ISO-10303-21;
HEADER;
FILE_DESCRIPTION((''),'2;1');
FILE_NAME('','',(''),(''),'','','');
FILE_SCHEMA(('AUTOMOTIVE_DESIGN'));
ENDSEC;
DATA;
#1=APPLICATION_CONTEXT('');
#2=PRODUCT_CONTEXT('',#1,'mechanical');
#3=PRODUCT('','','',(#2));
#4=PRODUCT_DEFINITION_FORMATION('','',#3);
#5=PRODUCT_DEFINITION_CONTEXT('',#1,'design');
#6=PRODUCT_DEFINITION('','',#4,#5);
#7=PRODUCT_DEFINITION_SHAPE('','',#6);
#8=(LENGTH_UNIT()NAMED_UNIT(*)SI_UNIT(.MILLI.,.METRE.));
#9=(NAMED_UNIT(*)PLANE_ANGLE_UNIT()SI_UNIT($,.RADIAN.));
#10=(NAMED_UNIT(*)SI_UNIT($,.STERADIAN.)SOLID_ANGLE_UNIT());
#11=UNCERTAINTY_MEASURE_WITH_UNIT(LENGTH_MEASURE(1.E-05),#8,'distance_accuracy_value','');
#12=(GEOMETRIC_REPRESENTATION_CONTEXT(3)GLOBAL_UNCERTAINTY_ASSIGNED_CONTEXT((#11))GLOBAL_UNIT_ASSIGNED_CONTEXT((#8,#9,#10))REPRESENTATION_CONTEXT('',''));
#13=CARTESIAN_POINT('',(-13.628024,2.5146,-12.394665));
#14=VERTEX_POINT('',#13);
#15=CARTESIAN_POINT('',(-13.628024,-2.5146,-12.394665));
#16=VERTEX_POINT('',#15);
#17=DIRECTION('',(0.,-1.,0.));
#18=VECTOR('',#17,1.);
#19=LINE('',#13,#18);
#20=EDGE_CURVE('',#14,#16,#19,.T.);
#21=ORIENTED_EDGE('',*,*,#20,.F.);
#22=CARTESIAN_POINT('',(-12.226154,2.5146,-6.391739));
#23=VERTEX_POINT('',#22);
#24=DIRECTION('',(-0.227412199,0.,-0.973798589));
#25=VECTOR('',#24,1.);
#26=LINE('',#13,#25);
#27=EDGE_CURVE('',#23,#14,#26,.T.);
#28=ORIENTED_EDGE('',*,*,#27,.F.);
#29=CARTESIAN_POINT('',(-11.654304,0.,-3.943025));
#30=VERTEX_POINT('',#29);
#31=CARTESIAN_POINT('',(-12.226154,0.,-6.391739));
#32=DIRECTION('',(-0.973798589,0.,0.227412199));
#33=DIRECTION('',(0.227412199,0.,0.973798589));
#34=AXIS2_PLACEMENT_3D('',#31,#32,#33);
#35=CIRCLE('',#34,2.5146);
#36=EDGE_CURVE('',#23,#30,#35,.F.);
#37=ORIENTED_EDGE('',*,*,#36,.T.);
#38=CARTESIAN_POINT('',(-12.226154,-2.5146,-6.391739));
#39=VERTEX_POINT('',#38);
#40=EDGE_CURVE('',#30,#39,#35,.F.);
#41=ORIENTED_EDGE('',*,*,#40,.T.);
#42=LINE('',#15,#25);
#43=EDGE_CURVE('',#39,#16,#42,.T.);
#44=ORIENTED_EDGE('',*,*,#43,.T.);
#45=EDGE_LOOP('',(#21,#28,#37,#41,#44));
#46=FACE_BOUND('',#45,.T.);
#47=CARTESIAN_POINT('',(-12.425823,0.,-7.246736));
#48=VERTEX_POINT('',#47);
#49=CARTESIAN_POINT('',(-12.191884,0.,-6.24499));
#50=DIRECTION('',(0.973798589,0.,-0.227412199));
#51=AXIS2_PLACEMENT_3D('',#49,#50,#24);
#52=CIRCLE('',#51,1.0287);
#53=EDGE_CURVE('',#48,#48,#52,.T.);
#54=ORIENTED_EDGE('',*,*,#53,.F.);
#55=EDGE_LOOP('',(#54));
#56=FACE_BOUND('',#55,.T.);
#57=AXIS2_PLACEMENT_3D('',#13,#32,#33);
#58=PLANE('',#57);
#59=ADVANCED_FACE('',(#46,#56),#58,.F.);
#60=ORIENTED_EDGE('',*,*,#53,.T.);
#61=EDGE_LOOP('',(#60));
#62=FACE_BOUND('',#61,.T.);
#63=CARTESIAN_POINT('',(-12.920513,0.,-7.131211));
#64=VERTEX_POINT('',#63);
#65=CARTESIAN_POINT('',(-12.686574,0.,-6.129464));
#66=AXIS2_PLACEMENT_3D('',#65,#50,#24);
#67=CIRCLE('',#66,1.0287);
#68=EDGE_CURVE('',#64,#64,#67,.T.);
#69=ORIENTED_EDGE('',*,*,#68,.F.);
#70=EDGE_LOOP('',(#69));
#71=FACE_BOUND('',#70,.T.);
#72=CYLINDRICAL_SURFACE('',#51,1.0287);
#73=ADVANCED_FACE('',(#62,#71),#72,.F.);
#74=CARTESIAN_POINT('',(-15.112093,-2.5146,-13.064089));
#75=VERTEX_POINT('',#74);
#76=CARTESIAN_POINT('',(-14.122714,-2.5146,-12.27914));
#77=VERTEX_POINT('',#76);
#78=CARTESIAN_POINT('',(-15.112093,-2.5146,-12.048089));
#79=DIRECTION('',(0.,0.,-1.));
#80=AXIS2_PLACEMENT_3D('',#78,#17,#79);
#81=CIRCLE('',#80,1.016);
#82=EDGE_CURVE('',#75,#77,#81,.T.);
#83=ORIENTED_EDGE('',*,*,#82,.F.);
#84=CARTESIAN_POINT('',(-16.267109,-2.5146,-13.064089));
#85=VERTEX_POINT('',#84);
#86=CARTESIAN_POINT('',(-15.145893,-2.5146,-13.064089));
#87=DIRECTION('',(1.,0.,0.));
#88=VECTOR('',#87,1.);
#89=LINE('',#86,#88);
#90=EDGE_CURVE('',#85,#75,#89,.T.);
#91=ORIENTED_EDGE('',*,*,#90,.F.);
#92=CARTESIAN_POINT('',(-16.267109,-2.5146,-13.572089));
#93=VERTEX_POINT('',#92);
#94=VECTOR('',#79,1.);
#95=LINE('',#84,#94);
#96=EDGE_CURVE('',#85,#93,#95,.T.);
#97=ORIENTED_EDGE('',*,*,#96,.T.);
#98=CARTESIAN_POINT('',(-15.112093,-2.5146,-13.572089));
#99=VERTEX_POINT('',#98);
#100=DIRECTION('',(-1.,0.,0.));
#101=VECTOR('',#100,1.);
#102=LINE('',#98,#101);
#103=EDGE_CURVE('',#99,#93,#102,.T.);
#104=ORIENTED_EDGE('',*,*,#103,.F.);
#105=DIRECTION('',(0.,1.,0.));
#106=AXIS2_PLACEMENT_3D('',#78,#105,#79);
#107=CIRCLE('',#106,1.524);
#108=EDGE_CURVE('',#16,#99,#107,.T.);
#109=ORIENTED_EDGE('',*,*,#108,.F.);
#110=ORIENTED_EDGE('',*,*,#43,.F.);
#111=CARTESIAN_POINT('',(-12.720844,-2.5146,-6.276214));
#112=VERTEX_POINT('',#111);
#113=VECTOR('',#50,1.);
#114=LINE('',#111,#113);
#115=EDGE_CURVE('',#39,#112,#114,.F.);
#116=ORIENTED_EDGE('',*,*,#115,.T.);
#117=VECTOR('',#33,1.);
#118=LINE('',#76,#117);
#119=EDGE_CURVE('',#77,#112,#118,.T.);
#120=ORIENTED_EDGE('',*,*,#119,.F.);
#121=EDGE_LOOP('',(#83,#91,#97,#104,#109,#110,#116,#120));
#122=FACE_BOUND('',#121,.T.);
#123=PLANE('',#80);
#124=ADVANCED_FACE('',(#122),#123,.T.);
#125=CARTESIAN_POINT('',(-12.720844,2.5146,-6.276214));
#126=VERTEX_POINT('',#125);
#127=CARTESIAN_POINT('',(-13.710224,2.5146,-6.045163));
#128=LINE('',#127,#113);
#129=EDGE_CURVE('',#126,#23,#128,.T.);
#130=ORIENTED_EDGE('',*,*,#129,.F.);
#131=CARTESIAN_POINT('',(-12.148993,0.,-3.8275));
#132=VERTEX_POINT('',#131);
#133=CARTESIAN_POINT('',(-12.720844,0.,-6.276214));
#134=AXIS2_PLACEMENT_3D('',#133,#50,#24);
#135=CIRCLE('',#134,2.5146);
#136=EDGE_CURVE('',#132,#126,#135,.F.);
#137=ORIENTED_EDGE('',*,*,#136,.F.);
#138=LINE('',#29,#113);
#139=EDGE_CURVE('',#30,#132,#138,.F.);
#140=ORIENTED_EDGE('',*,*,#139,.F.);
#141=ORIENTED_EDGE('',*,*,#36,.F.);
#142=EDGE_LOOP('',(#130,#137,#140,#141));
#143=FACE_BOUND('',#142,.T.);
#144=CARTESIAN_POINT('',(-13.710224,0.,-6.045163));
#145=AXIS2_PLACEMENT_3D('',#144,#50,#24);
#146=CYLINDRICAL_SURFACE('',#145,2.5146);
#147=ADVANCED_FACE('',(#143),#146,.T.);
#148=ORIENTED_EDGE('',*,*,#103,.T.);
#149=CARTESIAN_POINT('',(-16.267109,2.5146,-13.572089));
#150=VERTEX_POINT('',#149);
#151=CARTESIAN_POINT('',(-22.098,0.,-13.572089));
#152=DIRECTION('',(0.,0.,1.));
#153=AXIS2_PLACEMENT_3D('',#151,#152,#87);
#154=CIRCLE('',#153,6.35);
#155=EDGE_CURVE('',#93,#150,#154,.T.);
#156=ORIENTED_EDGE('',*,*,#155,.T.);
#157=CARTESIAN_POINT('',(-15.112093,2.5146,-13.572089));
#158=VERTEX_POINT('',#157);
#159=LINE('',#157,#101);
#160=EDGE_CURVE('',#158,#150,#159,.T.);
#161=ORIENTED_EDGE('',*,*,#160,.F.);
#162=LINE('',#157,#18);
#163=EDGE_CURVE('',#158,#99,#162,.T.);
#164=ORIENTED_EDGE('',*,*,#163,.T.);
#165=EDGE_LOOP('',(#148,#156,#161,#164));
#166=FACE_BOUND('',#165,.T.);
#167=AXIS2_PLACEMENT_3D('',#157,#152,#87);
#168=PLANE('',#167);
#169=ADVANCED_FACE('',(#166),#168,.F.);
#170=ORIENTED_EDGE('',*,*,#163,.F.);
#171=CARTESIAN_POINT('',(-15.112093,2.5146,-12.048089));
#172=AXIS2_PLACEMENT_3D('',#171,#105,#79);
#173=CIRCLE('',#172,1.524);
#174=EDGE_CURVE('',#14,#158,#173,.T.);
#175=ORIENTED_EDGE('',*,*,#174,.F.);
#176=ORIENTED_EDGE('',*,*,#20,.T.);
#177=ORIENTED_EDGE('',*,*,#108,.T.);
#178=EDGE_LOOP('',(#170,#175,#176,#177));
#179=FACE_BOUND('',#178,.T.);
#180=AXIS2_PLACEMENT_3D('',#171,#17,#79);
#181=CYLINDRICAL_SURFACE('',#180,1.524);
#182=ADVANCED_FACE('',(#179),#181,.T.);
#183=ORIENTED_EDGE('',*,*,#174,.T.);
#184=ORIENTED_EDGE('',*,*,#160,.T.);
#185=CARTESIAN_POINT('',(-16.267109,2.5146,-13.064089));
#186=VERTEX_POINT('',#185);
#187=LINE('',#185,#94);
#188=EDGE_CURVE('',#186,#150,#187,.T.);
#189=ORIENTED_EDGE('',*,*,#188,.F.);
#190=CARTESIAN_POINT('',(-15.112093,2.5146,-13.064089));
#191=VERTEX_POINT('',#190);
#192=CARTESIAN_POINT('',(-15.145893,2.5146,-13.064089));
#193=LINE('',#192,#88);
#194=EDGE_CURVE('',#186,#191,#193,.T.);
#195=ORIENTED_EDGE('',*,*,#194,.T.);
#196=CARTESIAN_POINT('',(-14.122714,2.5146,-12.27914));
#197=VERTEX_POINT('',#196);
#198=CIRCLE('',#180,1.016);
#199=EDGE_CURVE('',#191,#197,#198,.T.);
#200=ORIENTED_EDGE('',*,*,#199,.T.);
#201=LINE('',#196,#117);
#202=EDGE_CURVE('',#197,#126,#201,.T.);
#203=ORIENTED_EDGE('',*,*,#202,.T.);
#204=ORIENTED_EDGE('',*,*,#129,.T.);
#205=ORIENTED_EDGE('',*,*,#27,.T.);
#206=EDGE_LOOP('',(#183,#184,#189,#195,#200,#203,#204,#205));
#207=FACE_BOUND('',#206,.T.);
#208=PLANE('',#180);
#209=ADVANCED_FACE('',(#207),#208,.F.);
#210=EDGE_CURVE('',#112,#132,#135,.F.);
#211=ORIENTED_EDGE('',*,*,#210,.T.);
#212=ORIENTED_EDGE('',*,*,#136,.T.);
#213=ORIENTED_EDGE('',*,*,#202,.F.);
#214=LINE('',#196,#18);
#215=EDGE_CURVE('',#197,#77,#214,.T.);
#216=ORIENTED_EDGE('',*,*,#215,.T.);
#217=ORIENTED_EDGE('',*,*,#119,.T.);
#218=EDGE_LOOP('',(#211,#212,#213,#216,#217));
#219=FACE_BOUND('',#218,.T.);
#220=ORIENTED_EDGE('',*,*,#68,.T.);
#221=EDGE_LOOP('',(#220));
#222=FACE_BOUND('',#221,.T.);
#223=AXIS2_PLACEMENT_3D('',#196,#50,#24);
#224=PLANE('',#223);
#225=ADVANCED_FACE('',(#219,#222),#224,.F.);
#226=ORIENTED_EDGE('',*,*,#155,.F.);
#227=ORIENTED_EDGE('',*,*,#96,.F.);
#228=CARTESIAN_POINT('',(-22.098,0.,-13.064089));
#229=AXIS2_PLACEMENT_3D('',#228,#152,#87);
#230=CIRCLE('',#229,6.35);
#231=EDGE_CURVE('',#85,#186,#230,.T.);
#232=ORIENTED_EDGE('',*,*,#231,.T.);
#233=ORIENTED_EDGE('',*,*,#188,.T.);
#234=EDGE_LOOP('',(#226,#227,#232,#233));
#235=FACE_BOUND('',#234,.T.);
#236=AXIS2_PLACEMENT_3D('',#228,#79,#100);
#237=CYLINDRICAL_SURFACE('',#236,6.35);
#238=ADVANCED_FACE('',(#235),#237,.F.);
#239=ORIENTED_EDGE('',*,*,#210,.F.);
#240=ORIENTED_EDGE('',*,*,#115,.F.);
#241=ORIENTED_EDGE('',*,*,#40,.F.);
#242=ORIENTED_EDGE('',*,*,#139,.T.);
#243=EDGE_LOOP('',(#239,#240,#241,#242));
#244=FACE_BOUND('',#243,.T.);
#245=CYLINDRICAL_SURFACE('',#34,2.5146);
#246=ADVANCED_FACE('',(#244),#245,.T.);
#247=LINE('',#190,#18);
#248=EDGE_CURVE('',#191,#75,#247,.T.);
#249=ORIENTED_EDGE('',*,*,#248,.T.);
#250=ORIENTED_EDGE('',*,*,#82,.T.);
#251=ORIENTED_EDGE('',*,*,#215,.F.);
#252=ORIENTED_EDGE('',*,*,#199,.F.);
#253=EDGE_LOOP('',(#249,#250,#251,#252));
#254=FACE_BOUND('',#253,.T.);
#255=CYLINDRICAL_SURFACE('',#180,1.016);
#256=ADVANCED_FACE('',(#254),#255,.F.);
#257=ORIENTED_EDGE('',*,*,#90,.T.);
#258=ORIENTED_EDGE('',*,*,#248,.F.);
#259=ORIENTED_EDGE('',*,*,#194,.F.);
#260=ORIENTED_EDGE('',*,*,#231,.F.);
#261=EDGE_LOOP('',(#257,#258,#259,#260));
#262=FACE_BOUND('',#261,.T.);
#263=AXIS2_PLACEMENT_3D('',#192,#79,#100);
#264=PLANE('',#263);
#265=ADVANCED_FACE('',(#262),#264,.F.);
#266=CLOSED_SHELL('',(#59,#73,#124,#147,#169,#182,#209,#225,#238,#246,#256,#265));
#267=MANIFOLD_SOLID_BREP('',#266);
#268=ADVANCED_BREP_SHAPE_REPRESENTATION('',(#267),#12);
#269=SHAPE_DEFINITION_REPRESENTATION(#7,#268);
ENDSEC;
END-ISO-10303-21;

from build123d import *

# Parameters (mm, degrees)
EXTRUDE1_DEPTH                   = 2.5146
EXTRUDE1_DEPTH_BACK              = 2.5146
FILLET1_R                        = 2.5146
EXTRUDE2_DEPTH                   = 0.508
F_97_0_0059_DIAMETER_HOLE1_D     = 2.0574
F_97_0_0059_DIAMETER_HOLE1_DEPTH = 6.35


with BuildPart() as part:
    # Sketch1 → Extrude1 (new, two sides: drawn at the far end of the back side and taken through both)
    with BuildSketch(Plane(origin=(0, 0, 0), x_dir=(1, 0, 0), z_dir=(0, 1, 0)).offset(-EXTRUDE1_DEPTH_BACK)):
        with BuildLine():
            Line((-15.145893147, 13.572089242), (-15.145893147, 13.064089242))
            Line((-15.145893147, 13.064089242), (-15.112093192, 13.064089242))
            ThreePointArc((-15.112093192, 13.064089242), (-14.480623322, 12.844017507), (-14.122713826, 12.279140036))
            Line((-14.122713826, 12.279140036), (-12.14899346, 3.827499715))
            Line((-12.14899346, 3.827499715), (-11.654303777, 3.943025112))
            Line((-11.654303777, 3.943025112), (-13.628024142, 12.394665433))
            ThreePointArc((-13.628024142, 12.394665433), (-14.164888387, 13.24198164), (-15.112093192, 13.572089242))
            Line((-15.112093192, 13.572089242), (-15.145893147, 13.572089242))
        make_face()
    extrude(amount=EXTRUDE1_DEPTH + EXTRUDE1_DEPTH_BACK)

    # Fillet1
    fillet1_edges = [part.edges().sort_by_distance(p)[0] for p in [
        (-11.901648619, -2.5146, -3.885262414),
        (-11.901648619, 2.5146, -3.885262414),
    ]]
    fillet(fillet1_edges, radius=FILLET1_R - 0.0001)  # a hair under: the kernel refuses the full size

    # Sketch2 → Extrude2 (add)
    with BuildSketch(Plane(origin=(0, 0, -13.572089242), x_dir=(-1, 0, 0), z_dir=(0, 0, -1))):
        with BuildLine():
            Line((15.145893147, 2.5146), (15.145893147, -2.5146))
            Line((15.145893147, -2.5146), (16.267109258, -2.5146))
            ThreePointArc((16.267109258, -2.5146), (15.748, 0), (16.267109258, 2.5146))
            Line((16.267109258, 2.5146), (15.145893147, 2.5146))
        make_face()
    extrude(amount=-EXTRUDE2_DEPTH)

    # #97 (0.0059) Diameter Hole1
    with Locations(Plane(origin=(-12.191883936, 0, -6.244989577), x_dir=(0.227412198577, 0, 0.973798589), z_dir=(0.973798589, 0, -0.227412198577))):
        with Locations((0, 0)):
            Hole(F_97_0_0059_DIAMETER_HOLE1_D / 2, depth=F_97_0_0059_DIAMETER_HOLE1_DEPTH)


solid = part.part
